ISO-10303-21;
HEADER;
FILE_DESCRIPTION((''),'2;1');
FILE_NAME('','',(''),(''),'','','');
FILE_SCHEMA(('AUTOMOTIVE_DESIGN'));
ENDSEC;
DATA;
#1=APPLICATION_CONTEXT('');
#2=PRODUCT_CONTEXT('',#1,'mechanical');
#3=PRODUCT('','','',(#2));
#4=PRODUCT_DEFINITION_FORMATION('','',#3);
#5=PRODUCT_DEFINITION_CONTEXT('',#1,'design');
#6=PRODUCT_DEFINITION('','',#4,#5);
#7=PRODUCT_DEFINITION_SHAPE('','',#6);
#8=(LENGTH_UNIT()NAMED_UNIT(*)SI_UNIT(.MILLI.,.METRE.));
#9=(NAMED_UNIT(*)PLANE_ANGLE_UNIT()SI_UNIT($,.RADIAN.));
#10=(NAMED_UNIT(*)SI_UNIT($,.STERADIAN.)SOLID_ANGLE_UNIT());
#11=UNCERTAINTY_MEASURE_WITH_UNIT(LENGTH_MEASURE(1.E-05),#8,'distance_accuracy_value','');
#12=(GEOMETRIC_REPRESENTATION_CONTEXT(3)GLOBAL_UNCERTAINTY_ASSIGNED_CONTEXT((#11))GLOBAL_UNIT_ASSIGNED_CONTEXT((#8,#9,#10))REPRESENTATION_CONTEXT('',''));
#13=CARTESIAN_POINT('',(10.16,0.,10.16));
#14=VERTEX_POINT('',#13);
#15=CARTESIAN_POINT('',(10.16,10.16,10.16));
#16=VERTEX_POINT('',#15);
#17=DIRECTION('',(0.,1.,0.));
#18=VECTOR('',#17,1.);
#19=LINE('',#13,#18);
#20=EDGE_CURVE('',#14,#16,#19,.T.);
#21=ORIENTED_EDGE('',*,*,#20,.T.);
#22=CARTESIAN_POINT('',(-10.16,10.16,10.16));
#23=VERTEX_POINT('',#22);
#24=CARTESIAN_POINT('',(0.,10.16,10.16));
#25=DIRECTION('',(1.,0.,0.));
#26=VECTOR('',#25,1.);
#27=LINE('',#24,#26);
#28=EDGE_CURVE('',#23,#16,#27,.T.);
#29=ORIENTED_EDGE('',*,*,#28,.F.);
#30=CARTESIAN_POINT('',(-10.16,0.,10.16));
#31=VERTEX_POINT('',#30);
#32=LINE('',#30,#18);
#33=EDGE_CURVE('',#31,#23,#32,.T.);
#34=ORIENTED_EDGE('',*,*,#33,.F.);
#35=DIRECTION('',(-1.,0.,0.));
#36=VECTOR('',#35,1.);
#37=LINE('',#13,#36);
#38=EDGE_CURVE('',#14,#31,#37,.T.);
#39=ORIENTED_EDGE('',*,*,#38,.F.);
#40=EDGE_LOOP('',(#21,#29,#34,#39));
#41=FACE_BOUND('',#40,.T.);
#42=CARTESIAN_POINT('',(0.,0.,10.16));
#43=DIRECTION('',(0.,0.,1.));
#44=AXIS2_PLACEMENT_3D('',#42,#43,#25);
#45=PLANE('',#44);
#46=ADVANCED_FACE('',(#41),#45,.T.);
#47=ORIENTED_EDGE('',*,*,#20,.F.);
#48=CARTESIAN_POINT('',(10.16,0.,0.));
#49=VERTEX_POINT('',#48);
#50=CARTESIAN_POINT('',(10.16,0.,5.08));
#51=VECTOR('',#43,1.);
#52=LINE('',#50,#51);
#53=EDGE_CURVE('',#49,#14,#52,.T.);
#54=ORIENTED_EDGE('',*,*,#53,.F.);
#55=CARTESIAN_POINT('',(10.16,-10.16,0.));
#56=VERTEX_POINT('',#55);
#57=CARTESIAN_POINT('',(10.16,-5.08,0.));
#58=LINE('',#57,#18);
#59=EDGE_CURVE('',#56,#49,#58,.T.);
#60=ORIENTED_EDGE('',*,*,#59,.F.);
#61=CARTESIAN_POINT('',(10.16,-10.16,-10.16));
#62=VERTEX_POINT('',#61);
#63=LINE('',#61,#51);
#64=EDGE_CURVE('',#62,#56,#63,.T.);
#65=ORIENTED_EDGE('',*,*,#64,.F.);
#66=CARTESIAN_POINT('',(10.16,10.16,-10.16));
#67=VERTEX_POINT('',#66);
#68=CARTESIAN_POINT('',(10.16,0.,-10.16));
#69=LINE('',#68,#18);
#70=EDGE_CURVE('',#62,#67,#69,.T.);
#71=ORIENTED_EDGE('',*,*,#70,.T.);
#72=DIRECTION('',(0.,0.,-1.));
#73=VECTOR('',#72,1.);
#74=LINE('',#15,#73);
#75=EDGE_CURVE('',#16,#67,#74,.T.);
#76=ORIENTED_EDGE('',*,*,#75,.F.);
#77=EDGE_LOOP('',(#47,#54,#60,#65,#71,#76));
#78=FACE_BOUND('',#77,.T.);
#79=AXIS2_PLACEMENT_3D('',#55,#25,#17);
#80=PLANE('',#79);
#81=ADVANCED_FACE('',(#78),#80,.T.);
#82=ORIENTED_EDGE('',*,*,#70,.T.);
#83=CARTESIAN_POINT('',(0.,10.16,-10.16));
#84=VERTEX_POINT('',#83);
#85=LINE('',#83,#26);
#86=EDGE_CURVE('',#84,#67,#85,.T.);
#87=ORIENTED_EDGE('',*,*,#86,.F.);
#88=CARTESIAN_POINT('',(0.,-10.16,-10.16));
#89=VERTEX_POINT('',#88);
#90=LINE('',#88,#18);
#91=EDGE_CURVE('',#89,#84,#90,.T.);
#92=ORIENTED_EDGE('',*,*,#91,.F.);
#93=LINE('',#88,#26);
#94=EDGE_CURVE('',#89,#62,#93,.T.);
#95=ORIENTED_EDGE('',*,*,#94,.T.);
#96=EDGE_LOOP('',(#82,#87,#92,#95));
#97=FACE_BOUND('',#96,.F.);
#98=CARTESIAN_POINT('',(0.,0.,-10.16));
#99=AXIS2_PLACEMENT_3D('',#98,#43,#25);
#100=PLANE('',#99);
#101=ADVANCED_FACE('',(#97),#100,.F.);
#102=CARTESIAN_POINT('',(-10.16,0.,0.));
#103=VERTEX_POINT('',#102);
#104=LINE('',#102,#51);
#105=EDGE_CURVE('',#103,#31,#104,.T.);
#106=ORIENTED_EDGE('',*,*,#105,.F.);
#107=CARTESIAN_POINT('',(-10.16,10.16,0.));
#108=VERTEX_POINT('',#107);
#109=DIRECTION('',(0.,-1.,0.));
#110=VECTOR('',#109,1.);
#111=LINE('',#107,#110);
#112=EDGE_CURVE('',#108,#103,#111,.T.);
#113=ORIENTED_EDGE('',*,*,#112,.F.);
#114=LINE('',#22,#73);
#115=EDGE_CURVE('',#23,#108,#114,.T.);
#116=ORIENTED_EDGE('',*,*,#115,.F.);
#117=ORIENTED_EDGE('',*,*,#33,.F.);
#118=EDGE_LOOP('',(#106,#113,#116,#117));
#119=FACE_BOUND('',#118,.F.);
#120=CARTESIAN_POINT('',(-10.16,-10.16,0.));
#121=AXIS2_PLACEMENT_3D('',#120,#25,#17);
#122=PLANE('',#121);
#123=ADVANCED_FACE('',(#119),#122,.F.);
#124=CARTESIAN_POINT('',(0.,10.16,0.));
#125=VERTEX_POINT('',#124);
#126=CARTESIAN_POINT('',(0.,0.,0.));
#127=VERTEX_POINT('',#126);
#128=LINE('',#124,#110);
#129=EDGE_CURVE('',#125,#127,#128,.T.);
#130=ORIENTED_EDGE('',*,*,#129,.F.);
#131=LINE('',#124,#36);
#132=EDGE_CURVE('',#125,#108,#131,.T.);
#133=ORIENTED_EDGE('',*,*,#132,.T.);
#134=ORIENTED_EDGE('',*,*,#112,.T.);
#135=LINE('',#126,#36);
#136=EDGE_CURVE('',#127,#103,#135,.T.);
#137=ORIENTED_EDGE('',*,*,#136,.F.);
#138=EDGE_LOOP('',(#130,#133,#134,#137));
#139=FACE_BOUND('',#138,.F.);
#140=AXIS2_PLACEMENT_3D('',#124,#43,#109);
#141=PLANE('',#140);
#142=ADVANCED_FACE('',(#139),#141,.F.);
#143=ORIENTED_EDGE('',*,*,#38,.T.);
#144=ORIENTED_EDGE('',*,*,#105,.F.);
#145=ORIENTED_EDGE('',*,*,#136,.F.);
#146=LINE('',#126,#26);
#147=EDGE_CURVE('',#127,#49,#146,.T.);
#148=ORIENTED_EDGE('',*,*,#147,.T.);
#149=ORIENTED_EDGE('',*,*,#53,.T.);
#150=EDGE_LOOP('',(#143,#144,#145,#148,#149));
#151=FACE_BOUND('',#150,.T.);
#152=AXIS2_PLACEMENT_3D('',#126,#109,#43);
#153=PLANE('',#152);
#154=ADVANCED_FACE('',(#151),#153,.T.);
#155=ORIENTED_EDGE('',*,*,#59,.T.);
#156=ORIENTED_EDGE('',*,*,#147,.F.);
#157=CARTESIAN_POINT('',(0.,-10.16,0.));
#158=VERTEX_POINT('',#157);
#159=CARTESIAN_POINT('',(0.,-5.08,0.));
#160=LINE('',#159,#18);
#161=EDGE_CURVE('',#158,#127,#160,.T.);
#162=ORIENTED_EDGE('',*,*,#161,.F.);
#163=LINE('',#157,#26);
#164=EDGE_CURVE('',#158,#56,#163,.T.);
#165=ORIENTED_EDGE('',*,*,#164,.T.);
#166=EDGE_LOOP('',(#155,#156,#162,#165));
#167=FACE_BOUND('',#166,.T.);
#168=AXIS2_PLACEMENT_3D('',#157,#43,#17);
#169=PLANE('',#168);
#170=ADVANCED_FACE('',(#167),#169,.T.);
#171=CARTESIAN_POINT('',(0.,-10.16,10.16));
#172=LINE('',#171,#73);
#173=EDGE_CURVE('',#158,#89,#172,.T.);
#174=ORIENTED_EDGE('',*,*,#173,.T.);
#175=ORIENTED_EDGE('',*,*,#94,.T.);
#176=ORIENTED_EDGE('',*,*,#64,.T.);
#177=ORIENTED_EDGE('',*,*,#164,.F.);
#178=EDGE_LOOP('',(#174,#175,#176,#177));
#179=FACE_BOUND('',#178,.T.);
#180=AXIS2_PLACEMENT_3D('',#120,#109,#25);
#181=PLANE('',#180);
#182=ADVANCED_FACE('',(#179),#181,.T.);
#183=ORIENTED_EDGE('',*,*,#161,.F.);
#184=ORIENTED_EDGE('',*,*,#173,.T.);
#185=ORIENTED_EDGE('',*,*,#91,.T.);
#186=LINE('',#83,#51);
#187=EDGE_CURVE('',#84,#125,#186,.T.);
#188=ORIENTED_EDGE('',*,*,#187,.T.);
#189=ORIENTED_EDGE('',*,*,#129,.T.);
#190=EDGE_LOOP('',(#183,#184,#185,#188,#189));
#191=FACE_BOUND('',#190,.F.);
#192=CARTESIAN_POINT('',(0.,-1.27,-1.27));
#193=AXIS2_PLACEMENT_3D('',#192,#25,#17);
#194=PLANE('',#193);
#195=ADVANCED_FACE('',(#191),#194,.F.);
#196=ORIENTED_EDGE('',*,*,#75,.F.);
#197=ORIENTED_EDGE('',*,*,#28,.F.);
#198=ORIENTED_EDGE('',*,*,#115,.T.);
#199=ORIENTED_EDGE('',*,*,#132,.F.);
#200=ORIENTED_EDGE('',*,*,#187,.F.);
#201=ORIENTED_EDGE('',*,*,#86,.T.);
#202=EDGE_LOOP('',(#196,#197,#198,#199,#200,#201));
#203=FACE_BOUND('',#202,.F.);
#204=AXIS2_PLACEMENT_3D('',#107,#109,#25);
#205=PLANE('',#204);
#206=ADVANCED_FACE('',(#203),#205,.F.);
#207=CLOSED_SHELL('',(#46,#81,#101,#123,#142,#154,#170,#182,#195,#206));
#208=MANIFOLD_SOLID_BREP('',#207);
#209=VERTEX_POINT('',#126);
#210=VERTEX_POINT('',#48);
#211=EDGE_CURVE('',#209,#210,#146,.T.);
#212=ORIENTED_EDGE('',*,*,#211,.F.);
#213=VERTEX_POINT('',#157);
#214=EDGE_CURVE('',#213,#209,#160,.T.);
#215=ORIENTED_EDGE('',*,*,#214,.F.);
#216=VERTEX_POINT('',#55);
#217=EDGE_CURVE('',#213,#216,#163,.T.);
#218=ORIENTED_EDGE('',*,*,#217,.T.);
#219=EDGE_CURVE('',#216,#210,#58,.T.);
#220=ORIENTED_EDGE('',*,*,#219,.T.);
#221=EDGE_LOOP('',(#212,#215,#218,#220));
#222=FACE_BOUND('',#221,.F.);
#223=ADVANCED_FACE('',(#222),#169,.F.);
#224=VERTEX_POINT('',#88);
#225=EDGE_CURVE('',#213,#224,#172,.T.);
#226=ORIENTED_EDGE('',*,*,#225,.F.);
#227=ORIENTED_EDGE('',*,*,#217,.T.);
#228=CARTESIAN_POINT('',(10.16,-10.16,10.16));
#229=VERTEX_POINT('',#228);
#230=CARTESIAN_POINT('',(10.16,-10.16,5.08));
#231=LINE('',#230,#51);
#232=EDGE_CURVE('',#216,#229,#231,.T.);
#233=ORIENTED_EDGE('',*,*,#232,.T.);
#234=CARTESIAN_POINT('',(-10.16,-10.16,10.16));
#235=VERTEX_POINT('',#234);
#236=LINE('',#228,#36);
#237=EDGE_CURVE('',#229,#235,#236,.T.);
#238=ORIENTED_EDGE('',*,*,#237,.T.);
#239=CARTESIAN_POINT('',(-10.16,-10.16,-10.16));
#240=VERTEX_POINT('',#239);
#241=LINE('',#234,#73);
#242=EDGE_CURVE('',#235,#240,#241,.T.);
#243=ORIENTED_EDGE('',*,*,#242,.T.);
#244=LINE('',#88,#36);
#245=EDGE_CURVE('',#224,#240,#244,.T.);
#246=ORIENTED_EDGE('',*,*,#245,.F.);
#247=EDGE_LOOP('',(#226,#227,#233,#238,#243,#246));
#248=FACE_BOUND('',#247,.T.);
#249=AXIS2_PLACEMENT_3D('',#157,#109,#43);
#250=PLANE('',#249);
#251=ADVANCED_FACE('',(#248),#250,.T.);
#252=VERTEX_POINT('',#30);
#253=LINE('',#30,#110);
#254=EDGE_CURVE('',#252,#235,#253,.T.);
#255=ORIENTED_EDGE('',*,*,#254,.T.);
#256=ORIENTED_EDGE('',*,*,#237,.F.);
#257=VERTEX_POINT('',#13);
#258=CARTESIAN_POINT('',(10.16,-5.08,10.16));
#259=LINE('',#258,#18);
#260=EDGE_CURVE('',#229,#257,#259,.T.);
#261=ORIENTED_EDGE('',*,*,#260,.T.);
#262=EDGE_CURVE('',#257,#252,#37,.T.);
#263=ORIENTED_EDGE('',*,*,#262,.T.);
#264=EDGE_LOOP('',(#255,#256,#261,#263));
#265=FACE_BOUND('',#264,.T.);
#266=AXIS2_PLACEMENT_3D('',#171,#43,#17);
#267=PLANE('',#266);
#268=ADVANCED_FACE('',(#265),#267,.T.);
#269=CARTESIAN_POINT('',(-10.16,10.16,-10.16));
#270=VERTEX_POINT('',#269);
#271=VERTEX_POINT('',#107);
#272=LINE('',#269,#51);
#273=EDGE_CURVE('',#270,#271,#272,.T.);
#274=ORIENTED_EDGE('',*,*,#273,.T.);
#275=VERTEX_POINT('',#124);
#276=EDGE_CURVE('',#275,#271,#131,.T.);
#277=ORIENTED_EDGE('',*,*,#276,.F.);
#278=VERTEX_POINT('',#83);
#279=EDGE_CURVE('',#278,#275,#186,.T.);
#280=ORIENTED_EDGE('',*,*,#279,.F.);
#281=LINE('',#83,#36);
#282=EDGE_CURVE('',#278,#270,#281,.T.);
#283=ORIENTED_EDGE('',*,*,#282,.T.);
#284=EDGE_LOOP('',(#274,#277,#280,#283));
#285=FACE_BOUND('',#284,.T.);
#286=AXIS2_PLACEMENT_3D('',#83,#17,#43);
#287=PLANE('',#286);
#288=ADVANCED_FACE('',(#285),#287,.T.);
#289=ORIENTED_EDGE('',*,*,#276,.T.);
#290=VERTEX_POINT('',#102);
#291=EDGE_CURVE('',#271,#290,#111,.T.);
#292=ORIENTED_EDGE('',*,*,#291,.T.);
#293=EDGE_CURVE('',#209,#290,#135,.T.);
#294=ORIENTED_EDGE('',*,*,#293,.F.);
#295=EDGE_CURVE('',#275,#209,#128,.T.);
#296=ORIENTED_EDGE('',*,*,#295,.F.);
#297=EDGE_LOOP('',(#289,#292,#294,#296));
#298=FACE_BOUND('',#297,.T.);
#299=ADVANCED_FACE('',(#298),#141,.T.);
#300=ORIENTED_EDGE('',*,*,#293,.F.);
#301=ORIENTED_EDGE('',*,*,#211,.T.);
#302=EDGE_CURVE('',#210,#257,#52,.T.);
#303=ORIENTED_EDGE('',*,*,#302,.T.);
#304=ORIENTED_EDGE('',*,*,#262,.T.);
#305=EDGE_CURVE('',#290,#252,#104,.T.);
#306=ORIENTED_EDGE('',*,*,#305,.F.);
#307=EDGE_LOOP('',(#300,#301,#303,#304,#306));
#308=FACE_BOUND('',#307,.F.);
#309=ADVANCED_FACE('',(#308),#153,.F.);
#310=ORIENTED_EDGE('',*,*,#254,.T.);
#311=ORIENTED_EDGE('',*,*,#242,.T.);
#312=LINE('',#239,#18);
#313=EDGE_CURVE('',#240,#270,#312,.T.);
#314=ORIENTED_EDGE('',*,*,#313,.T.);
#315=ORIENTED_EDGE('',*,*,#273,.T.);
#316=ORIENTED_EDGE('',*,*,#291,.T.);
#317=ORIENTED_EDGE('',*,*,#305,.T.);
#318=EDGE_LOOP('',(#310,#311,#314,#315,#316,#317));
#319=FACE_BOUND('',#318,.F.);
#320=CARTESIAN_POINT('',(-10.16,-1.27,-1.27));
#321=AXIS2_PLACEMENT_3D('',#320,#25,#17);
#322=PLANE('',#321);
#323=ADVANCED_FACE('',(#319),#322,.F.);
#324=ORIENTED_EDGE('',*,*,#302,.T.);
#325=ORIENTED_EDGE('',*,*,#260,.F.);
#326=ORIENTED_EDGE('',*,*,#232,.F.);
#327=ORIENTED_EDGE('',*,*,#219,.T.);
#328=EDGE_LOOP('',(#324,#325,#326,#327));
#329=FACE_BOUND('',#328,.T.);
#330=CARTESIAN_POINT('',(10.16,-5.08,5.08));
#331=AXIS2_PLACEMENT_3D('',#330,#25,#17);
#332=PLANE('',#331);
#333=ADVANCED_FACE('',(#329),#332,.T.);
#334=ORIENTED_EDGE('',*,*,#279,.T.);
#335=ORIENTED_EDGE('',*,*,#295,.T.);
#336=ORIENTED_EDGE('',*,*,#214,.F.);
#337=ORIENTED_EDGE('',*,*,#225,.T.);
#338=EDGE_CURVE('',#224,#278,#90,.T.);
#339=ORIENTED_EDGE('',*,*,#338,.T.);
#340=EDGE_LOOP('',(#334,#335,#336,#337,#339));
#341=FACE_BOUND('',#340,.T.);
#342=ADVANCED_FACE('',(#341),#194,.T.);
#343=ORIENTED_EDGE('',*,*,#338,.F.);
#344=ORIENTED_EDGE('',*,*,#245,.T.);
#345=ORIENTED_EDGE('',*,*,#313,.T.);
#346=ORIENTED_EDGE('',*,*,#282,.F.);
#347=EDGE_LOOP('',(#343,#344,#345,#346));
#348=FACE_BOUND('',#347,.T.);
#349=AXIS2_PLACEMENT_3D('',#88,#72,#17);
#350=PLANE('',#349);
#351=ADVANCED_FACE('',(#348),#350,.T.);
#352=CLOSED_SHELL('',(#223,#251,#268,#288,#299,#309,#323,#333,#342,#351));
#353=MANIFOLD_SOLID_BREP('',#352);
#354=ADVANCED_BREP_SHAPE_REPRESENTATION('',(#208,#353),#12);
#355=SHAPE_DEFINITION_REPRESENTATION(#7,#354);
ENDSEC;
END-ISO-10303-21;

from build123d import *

# Parameters (mm, degrees)
F2_DEPTH      = 10.16
F3_W          = 10.16
F3_H          = 10.16
F4_DEPTH      = 10.16
F5_W          = 20.32
F5_H          = 20.32
F6_DEPTH      = 10.16
F6_DEPTH_BACK = 10.16


# Not quite as in the source:
# - a variable given as a bare number and used for a length is read in inches; the dataset says mm whatever the document's units were


with BuildPart() as f2:
    # F1 (on Right) → F2 (new body)
    with BuildSketch(Plane.YZ):
        Polygon((10.16, 0), (0, 0), (0, 10.16), (-10.16, 10.16), (-10.16, -10.16), (10.16, -10.16), align=None)
    extrude(amount=-F2_DEPTH)

    # F3 (on face) → F4 (join)
    with BuildSketch(Plane.YZ):
        with Locations((-5.08, 5.08)):
            Rectangle(F3_W, F3_H)
    extrude(amount=F4_DEPTH)


with BuildPart() as f6:
    # F5 (on Top) → F6 (new body, two sides)
    with BuildSketch(Plane.XY) as f6_sk:
        Rectangle(F5_W, F5_H)
    extrude(amount=F6_DEPTH)
    extrude(f6_sk.sketch, amount=-F6_DEPTH_BACK)

    # F7: cut F2
    add(f2.part, mode=Mode.SUBTRACT)


solid = Compound([f2.part, f6.part])
